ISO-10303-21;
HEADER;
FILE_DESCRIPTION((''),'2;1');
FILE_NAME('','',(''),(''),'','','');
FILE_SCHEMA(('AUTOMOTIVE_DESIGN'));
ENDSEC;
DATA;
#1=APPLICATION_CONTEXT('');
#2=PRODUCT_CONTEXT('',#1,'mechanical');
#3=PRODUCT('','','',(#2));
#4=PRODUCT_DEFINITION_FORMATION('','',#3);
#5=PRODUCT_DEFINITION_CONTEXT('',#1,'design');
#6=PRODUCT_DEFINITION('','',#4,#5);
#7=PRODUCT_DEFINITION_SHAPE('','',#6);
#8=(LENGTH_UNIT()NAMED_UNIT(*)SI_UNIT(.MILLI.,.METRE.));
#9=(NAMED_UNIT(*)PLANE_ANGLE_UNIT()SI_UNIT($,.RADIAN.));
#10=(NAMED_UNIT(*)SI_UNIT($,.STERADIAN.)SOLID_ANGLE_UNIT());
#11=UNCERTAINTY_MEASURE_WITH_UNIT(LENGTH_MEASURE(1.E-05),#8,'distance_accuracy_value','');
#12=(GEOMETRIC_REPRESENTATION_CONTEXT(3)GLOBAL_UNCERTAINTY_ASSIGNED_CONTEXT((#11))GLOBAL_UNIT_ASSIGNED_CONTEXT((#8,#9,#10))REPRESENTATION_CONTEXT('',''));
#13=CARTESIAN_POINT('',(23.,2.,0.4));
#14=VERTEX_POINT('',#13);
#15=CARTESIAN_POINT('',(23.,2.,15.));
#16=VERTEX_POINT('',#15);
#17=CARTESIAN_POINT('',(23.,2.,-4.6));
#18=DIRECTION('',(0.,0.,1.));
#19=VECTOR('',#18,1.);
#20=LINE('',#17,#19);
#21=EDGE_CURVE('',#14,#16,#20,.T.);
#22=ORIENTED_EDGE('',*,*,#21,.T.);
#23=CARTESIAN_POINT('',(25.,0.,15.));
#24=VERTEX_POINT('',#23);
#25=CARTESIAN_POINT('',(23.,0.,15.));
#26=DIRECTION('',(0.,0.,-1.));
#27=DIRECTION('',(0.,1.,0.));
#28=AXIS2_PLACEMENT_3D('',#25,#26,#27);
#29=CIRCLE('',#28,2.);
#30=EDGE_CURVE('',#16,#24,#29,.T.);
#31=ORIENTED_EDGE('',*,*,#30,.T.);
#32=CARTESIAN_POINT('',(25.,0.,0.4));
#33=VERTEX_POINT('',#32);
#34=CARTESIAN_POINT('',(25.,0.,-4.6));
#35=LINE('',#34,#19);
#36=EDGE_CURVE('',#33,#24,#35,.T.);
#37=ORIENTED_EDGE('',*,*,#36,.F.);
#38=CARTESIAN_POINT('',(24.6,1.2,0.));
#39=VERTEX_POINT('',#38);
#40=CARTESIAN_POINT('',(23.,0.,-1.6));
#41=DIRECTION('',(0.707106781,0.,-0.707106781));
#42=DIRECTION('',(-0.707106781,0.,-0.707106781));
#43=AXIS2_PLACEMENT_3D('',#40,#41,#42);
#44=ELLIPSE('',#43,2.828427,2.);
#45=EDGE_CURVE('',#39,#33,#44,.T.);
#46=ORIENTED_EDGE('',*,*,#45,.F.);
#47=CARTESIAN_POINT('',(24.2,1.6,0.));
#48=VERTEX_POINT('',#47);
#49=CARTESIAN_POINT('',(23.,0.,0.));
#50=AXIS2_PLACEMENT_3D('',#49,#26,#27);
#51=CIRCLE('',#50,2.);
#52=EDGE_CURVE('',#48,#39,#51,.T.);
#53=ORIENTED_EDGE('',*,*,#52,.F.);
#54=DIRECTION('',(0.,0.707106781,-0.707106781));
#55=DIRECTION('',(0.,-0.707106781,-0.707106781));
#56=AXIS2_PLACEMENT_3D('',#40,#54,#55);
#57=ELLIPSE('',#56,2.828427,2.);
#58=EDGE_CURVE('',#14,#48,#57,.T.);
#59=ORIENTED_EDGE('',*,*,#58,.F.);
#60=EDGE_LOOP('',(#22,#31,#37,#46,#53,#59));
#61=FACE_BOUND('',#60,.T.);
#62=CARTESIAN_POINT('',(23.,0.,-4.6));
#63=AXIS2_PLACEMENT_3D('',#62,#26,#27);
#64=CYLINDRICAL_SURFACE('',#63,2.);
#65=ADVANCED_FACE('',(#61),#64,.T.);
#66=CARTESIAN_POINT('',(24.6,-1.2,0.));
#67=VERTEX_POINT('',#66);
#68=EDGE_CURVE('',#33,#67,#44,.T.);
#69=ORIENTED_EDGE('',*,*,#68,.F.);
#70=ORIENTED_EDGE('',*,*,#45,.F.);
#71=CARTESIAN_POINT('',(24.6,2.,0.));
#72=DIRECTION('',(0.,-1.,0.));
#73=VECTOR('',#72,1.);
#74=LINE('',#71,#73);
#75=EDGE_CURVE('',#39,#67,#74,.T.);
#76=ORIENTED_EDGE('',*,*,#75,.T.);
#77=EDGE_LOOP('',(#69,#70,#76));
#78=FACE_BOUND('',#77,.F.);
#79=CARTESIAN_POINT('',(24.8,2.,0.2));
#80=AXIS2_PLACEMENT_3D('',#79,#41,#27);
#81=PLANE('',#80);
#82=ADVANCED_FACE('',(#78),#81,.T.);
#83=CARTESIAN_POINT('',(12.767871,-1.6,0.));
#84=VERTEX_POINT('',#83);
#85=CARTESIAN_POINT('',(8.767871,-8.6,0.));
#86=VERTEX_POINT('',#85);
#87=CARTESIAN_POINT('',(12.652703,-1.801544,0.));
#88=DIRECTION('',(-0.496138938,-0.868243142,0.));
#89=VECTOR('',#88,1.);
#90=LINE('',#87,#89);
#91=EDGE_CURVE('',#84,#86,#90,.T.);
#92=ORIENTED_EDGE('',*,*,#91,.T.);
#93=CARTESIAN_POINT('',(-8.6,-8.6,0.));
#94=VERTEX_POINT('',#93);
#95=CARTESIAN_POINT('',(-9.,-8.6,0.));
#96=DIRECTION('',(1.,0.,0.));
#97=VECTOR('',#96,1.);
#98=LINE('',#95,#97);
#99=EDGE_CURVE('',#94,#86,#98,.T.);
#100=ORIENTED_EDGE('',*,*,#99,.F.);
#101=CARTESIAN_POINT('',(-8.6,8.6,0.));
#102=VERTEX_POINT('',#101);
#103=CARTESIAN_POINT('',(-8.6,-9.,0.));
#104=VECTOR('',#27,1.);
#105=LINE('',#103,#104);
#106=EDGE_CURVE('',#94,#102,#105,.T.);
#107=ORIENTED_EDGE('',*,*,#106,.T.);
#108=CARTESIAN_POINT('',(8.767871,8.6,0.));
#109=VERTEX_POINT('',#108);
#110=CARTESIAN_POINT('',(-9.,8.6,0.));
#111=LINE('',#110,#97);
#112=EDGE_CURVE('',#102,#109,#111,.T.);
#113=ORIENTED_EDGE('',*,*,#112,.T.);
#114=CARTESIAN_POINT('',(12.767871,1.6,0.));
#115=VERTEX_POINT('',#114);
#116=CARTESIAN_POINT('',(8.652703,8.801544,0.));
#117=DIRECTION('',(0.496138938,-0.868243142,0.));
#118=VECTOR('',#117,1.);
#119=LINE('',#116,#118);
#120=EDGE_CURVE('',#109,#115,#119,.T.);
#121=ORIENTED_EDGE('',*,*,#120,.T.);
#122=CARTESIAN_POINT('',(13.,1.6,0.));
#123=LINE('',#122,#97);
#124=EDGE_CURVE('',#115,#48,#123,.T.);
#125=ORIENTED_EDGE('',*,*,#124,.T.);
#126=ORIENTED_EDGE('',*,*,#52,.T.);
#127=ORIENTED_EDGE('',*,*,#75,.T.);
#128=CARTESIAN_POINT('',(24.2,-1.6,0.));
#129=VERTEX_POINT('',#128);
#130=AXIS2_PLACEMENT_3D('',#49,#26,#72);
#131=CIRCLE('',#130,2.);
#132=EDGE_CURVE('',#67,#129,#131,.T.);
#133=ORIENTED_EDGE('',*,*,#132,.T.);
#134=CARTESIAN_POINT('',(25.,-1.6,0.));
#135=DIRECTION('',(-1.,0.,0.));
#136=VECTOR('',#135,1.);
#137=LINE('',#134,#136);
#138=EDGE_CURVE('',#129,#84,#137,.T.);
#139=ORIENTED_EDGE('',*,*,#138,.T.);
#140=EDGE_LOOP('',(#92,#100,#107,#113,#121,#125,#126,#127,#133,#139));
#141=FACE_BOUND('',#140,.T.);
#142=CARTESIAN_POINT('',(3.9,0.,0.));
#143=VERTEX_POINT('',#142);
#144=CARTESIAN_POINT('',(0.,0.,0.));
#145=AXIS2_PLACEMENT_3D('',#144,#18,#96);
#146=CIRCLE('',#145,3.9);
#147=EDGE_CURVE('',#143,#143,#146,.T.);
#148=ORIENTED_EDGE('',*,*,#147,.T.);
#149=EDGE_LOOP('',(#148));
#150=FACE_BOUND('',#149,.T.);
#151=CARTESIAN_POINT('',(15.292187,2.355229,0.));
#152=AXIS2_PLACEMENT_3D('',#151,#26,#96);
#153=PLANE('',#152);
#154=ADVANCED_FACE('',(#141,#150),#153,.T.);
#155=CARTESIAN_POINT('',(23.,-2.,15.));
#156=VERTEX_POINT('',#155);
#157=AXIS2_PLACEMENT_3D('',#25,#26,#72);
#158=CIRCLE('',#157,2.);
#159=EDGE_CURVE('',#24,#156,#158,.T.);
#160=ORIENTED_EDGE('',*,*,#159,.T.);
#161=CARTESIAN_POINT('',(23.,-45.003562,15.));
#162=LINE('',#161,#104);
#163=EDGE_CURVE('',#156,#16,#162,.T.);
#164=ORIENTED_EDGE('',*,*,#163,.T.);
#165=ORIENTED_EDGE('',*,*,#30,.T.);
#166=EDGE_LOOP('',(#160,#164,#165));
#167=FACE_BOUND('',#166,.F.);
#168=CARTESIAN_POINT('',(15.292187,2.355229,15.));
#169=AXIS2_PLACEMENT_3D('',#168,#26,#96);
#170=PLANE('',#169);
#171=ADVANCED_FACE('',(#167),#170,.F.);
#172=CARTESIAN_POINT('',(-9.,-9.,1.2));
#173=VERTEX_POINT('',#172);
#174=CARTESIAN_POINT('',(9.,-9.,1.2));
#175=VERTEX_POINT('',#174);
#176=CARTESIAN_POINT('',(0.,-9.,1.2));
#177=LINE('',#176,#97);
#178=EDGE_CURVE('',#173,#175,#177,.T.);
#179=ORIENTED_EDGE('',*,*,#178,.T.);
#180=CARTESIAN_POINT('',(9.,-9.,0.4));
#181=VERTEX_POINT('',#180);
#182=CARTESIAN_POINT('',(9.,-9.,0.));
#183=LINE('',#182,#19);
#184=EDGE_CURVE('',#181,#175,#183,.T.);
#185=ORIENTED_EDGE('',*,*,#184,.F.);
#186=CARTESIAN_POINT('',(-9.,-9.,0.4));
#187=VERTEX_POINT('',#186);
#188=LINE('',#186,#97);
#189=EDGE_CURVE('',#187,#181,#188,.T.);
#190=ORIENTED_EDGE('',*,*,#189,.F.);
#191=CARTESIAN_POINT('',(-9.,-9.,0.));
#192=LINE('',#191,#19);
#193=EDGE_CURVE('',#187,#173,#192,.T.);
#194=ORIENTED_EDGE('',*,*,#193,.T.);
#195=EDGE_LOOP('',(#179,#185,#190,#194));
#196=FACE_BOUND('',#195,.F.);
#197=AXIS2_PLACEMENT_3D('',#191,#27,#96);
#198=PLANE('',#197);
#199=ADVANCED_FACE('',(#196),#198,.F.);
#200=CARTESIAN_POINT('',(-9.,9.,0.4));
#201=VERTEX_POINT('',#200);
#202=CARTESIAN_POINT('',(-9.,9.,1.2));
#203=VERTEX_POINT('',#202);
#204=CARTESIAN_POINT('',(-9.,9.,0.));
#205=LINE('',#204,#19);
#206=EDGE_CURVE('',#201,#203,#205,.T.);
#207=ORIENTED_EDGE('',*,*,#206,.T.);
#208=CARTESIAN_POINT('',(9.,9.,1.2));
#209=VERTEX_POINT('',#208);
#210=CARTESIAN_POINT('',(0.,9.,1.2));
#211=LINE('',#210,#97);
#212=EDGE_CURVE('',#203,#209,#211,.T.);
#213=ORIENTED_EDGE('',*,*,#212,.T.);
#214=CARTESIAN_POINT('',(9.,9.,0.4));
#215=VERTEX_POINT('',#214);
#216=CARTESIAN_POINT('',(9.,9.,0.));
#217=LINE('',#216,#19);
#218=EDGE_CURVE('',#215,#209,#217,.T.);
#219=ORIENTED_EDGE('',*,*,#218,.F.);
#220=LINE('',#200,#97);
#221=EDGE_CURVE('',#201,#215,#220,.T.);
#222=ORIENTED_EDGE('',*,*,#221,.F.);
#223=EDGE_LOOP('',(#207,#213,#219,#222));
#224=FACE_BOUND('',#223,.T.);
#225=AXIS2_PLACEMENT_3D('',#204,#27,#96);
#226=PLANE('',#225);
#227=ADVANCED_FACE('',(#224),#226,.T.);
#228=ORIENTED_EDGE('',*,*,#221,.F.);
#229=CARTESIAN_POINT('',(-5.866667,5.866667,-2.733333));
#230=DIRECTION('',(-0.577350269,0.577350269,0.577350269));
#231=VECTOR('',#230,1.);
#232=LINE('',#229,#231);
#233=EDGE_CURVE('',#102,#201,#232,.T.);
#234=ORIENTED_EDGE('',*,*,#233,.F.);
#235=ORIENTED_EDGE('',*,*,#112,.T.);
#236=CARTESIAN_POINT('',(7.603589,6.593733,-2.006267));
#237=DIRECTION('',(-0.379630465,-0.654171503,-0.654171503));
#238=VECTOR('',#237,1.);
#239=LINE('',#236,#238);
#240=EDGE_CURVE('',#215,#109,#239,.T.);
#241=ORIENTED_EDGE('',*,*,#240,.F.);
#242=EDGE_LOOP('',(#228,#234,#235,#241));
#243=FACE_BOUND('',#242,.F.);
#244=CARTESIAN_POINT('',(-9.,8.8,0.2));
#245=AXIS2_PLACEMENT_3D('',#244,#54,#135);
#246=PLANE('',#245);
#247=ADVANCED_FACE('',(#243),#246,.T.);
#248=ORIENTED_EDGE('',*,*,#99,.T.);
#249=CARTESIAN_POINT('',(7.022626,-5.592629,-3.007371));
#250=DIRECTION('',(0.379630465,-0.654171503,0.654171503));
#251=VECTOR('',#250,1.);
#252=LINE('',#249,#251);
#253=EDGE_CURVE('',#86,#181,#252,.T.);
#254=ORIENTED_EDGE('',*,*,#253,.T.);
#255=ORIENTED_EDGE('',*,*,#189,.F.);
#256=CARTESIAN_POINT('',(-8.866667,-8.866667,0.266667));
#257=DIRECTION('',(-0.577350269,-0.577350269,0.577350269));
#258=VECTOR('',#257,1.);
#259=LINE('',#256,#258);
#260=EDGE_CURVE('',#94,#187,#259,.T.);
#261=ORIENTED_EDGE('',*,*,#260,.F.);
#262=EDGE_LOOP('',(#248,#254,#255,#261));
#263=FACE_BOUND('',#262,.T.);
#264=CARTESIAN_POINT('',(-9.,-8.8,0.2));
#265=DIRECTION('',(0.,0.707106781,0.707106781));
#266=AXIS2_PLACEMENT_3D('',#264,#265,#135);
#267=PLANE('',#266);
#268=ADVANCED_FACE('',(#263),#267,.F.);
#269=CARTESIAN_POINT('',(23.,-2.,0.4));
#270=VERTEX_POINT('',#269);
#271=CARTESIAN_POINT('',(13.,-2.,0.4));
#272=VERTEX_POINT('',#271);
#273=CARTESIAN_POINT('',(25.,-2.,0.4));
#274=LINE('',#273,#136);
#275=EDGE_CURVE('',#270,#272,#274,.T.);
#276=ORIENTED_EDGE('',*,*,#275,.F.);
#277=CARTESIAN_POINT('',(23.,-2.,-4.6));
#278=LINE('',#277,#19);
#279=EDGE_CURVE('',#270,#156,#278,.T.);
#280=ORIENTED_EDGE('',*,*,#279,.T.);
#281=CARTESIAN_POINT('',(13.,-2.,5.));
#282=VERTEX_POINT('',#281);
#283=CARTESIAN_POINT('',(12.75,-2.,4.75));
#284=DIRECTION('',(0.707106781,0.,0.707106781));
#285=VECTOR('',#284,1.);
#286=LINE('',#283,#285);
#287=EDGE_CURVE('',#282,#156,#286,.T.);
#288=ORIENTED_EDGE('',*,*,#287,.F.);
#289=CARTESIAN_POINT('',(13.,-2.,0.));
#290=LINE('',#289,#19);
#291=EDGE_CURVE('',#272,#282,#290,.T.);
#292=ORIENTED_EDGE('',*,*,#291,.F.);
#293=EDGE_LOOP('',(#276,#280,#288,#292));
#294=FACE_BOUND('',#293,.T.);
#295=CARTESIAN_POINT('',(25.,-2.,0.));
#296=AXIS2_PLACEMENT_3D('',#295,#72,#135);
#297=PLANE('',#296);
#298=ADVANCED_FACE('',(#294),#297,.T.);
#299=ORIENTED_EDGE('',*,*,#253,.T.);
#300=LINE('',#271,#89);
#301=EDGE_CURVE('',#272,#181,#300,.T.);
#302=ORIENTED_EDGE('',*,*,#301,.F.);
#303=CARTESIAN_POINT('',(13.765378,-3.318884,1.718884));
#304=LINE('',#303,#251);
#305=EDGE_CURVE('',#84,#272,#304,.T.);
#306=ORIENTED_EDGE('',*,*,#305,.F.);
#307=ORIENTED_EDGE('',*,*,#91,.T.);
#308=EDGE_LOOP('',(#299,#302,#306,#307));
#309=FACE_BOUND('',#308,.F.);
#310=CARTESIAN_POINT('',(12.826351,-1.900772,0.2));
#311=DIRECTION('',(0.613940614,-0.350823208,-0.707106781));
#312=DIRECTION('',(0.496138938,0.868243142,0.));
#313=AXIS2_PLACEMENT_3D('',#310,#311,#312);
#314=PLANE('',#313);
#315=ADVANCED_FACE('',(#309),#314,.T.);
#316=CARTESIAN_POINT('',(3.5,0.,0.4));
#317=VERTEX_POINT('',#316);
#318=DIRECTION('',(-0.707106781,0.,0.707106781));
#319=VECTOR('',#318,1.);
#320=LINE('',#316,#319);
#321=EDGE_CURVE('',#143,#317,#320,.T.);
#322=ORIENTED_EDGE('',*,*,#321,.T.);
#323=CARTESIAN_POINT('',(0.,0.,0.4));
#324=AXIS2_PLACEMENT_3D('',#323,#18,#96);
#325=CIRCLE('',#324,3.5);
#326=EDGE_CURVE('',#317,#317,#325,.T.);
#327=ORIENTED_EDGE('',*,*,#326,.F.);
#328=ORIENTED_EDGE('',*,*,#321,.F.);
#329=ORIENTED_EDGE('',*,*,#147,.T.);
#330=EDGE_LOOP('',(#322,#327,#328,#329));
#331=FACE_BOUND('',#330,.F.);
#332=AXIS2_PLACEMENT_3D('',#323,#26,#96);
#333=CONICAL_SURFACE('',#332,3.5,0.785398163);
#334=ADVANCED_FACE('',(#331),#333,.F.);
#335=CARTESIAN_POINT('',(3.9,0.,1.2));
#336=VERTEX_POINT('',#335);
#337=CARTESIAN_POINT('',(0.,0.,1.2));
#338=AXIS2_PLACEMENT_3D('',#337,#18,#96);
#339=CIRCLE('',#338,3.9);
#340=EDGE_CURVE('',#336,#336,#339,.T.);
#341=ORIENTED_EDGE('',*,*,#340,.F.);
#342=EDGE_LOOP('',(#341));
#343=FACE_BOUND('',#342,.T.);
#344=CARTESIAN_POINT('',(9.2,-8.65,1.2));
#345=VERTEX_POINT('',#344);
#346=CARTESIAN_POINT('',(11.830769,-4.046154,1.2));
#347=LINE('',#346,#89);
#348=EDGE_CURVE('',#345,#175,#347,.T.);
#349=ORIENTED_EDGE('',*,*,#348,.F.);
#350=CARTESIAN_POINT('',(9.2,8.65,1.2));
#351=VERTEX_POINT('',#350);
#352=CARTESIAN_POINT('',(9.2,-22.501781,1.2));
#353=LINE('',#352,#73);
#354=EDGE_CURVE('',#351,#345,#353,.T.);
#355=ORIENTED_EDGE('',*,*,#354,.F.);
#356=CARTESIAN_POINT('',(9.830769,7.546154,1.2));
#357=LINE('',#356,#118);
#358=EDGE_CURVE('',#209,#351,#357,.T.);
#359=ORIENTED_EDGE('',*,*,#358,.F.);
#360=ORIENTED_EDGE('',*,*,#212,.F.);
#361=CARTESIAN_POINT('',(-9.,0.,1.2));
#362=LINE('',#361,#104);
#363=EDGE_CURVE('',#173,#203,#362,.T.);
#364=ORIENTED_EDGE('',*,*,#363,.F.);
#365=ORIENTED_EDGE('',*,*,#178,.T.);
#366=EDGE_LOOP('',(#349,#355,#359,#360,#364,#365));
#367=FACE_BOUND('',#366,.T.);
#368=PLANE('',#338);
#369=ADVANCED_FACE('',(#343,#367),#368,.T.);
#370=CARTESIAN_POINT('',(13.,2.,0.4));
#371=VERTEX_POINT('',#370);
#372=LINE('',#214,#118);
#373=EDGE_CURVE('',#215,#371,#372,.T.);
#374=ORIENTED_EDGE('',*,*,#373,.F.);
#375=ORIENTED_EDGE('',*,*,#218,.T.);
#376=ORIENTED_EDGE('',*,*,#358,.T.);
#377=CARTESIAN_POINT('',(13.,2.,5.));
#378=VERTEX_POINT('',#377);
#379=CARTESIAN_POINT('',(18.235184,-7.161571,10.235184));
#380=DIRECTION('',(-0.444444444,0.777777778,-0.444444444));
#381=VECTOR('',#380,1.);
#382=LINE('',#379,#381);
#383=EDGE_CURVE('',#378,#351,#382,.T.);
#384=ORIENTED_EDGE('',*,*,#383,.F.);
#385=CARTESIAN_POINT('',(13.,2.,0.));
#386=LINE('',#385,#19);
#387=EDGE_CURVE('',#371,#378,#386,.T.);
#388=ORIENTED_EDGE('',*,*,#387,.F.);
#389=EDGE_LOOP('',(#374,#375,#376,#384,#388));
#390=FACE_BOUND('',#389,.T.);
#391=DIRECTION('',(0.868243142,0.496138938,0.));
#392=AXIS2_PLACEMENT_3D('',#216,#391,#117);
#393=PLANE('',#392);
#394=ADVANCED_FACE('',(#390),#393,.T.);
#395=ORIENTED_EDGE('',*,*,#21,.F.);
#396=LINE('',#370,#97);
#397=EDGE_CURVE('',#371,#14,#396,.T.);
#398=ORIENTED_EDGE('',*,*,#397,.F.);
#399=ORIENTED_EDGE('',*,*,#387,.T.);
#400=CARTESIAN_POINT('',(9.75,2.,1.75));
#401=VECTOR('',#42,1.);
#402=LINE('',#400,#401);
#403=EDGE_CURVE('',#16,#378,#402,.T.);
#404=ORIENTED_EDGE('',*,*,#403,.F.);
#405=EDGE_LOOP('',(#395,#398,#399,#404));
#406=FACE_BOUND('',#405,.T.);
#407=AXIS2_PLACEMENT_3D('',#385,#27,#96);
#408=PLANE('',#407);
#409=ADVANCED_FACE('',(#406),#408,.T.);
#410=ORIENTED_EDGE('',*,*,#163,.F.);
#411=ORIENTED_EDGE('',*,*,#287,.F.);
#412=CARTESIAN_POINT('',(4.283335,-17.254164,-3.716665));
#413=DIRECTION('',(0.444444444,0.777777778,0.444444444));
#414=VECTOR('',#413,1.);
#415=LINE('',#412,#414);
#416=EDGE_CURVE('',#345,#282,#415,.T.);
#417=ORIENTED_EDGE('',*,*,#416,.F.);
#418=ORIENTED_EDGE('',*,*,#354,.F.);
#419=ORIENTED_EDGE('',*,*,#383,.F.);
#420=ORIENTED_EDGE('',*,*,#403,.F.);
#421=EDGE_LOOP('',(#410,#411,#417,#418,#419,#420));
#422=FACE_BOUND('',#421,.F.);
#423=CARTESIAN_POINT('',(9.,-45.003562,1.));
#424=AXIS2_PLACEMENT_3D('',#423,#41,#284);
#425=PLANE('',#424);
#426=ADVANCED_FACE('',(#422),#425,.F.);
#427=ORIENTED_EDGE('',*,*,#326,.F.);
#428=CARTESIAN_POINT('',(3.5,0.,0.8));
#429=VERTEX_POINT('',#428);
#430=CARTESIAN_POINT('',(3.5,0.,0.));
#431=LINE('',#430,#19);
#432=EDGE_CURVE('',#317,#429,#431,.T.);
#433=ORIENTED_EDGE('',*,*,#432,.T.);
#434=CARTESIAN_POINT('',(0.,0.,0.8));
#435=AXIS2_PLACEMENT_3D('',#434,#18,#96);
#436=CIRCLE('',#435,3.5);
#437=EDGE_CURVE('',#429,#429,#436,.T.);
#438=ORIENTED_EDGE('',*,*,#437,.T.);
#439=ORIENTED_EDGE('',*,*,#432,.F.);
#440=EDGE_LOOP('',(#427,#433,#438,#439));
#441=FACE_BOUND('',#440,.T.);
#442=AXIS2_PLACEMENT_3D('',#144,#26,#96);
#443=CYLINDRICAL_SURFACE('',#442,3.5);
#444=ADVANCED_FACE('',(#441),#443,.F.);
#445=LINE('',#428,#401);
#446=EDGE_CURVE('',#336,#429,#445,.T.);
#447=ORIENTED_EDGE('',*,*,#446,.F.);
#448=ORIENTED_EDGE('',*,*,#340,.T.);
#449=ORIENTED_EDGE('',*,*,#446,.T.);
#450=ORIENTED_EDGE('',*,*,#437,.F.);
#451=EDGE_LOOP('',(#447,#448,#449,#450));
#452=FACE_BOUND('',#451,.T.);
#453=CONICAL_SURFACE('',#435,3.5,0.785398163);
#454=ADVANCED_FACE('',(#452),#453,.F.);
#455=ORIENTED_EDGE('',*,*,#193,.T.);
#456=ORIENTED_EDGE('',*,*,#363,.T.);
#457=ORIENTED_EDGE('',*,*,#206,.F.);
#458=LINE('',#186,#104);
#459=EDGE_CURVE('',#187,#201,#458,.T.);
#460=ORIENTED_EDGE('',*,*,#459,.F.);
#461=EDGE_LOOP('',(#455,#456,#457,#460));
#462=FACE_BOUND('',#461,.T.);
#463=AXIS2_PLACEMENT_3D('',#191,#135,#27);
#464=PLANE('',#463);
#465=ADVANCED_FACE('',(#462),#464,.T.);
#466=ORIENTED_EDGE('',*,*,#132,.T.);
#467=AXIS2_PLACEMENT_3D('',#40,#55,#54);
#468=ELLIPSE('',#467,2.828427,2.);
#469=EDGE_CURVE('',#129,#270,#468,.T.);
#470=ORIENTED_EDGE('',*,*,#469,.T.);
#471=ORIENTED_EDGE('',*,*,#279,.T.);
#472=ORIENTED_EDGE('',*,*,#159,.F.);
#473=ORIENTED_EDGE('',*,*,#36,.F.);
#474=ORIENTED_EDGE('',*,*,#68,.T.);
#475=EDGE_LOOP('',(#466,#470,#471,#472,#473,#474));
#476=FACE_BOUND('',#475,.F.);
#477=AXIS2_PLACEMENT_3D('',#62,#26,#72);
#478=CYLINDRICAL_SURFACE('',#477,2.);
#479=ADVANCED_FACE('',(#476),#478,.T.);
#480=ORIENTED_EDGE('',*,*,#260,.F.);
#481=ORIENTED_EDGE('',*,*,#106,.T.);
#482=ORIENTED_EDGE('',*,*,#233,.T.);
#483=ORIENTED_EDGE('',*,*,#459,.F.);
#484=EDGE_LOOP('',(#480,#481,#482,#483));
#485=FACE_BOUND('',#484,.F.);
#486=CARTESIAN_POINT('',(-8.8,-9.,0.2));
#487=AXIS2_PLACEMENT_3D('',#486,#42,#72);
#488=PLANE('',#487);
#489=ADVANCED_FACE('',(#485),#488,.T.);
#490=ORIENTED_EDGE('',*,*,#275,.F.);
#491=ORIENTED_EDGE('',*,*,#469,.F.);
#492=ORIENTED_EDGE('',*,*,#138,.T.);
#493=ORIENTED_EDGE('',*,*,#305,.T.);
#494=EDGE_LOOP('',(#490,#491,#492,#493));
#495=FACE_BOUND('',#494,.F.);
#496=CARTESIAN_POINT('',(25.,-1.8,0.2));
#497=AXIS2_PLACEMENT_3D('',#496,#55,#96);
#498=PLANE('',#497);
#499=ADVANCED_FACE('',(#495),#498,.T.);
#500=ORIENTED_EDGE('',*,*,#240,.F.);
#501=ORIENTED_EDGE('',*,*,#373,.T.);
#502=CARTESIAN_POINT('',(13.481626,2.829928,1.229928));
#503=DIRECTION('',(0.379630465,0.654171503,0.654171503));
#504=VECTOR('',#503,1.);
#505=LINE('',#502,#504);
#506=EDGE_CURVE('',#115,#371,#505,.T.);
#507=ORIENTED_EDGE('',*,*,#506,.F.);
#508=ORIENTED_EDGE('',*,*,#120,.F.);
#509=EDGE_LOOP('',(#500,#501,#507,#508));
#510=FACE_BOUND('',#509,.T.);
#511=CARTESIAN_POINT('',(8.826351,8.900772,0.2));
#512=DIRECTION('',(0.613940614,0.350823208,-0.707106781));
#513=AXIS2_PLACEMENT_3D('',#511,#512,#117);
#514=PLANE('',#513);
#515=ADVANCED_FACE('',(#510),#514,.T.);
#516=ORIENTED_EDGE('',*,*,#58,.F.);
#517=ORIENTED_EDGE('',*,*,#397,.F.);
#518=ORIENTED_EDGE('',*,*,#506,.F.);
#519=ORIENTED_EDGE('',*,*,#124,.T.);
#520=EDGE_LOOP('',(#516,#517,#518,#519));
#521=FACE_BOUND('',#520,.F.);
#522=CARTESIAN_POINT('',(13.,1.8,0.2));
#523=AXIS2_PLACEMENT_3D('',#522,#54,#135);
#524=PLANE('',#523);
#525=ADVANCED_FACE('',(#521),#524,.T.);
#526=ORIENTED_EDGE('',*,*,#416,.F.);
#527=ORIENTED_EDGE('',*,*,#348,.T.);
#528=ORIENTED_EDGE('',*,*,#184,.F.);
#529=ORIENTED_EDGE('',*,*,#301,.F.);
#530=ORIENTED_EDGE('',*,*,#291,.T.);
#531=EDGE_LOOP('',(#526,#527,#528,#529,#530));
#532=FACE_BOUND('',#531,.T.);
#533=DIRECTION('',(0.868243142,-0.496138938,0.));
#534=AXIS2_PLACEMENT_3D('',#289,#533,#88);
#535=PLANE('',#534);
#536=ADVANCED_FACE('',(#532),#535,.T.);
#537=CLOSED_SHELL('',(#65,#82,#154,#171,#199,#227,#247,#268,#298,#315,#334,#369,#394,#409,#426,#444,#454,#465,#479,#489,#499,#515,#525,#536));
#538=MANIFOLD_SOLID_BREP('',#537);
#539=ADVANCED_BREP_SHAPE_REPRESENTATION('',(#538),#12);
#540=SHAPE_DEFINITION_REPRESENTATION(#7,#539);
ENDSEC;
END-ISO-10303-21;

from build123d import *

# Parameters (mm, degrees)
F0_W        = 18
F0_H        = 18
F0_R        = 3.5
F1_DEPTH    = 1.2
F3_DEPTH    = 15
F4_T4_DEPTH = 90.007123663
F5_SIZE     = 0.4
F6_T1_DEPTH = 24.6


# Not quite as in the source:
# - a fillet or chamfer that OpenCascade refuses, or shapes differently, is made with other operations: its cross-section is extruded or revolved along the edge and cut away or added


with BuildPart() as f1:
    # F0 (on Top) → F1 (new body)
    with BuildSketch(Plane.XY):
        Rectangle(F0_W, F0_H)
        Circle(F0_R, mode=Mode.SUBTRACT)
    extrude(amount=F1_DEPTH)

    # F2 (on face) → F3 (join)
    with BuildSketch(Plane(origin=(0, 0, 0), x_dir=(1, 0, 0), z_dir=(0, 0, -1))):
        Polygon((9, 0), (9, -9), (13, -2), (25, -2), (25, 0), align=None)
        Polygon((9, 9), (9, 0), (25, 0), (25, 2), (13, 2), align=None)
    extrude(amount=-F3_DEPTH)

    # F4: chamfer of 14 on 1 edges, made by hand


with BuildPart() as f4_tool2:
    # F4_s3 → F4_t4 (new body)
    with BuildSketch(Plane.XZ.offset(45.0035618315)):
        Polygon((9, 1), (23, 15), (9, 15), align=None)
    extrude(amount=-F4_T4_DEPTH)

    split(bisect_by=Plane.XY.offset(1.2), keep=Keep.TOP)


with BuildPart() as f1_1:
    add(f1.part)

    # F4_t1: cut F4_tool2
    add(f4_tool2.part, mode=Mode.SUBTRACT)

    # F5
    f5_edges = [f1_1.edges().sort_by_distance(p)[0] for p in [
        (0, -9, 0),
        (11, -5.5, 0),
        (19, -2, 0),
        (25, 0, 0),
        (19, 2, 0),
        (11, 5.5, 0),
        (0, 9, 0),
        (-9, 0, 0),
        (-3.5, 0, 0),
        (-3.5, 0, 1.2),
    ]]
    chamfer(f5_edges, length=F5_SIZE)

    # F6: fillet of radius 2 on 2 edges, made by hand

    # F6_s2 → F6_t1 (cut)
    with BuildSketch(Plane.XY.offset(-4.6)):
        with BuildLine():
            ThreePointArc((23, -2), (24.4142135624, -1.4142135624), (25, 0))
            Line((25, 0), (25, -2))
            Line((25, -2), (23, -2))
        make_face()
        with BuildLine():
            ThreePointArc((23, 2), (24.4142135624, 1.4142135624), (25, 0))
            Line((25, 0), (25, 2))
            Line((25, 2), (23, 2))
        make_face()
    extrude(amount=F6_T1_DEPTH, mode=Mode.SUBTRACT)


solid = f1_1.part
